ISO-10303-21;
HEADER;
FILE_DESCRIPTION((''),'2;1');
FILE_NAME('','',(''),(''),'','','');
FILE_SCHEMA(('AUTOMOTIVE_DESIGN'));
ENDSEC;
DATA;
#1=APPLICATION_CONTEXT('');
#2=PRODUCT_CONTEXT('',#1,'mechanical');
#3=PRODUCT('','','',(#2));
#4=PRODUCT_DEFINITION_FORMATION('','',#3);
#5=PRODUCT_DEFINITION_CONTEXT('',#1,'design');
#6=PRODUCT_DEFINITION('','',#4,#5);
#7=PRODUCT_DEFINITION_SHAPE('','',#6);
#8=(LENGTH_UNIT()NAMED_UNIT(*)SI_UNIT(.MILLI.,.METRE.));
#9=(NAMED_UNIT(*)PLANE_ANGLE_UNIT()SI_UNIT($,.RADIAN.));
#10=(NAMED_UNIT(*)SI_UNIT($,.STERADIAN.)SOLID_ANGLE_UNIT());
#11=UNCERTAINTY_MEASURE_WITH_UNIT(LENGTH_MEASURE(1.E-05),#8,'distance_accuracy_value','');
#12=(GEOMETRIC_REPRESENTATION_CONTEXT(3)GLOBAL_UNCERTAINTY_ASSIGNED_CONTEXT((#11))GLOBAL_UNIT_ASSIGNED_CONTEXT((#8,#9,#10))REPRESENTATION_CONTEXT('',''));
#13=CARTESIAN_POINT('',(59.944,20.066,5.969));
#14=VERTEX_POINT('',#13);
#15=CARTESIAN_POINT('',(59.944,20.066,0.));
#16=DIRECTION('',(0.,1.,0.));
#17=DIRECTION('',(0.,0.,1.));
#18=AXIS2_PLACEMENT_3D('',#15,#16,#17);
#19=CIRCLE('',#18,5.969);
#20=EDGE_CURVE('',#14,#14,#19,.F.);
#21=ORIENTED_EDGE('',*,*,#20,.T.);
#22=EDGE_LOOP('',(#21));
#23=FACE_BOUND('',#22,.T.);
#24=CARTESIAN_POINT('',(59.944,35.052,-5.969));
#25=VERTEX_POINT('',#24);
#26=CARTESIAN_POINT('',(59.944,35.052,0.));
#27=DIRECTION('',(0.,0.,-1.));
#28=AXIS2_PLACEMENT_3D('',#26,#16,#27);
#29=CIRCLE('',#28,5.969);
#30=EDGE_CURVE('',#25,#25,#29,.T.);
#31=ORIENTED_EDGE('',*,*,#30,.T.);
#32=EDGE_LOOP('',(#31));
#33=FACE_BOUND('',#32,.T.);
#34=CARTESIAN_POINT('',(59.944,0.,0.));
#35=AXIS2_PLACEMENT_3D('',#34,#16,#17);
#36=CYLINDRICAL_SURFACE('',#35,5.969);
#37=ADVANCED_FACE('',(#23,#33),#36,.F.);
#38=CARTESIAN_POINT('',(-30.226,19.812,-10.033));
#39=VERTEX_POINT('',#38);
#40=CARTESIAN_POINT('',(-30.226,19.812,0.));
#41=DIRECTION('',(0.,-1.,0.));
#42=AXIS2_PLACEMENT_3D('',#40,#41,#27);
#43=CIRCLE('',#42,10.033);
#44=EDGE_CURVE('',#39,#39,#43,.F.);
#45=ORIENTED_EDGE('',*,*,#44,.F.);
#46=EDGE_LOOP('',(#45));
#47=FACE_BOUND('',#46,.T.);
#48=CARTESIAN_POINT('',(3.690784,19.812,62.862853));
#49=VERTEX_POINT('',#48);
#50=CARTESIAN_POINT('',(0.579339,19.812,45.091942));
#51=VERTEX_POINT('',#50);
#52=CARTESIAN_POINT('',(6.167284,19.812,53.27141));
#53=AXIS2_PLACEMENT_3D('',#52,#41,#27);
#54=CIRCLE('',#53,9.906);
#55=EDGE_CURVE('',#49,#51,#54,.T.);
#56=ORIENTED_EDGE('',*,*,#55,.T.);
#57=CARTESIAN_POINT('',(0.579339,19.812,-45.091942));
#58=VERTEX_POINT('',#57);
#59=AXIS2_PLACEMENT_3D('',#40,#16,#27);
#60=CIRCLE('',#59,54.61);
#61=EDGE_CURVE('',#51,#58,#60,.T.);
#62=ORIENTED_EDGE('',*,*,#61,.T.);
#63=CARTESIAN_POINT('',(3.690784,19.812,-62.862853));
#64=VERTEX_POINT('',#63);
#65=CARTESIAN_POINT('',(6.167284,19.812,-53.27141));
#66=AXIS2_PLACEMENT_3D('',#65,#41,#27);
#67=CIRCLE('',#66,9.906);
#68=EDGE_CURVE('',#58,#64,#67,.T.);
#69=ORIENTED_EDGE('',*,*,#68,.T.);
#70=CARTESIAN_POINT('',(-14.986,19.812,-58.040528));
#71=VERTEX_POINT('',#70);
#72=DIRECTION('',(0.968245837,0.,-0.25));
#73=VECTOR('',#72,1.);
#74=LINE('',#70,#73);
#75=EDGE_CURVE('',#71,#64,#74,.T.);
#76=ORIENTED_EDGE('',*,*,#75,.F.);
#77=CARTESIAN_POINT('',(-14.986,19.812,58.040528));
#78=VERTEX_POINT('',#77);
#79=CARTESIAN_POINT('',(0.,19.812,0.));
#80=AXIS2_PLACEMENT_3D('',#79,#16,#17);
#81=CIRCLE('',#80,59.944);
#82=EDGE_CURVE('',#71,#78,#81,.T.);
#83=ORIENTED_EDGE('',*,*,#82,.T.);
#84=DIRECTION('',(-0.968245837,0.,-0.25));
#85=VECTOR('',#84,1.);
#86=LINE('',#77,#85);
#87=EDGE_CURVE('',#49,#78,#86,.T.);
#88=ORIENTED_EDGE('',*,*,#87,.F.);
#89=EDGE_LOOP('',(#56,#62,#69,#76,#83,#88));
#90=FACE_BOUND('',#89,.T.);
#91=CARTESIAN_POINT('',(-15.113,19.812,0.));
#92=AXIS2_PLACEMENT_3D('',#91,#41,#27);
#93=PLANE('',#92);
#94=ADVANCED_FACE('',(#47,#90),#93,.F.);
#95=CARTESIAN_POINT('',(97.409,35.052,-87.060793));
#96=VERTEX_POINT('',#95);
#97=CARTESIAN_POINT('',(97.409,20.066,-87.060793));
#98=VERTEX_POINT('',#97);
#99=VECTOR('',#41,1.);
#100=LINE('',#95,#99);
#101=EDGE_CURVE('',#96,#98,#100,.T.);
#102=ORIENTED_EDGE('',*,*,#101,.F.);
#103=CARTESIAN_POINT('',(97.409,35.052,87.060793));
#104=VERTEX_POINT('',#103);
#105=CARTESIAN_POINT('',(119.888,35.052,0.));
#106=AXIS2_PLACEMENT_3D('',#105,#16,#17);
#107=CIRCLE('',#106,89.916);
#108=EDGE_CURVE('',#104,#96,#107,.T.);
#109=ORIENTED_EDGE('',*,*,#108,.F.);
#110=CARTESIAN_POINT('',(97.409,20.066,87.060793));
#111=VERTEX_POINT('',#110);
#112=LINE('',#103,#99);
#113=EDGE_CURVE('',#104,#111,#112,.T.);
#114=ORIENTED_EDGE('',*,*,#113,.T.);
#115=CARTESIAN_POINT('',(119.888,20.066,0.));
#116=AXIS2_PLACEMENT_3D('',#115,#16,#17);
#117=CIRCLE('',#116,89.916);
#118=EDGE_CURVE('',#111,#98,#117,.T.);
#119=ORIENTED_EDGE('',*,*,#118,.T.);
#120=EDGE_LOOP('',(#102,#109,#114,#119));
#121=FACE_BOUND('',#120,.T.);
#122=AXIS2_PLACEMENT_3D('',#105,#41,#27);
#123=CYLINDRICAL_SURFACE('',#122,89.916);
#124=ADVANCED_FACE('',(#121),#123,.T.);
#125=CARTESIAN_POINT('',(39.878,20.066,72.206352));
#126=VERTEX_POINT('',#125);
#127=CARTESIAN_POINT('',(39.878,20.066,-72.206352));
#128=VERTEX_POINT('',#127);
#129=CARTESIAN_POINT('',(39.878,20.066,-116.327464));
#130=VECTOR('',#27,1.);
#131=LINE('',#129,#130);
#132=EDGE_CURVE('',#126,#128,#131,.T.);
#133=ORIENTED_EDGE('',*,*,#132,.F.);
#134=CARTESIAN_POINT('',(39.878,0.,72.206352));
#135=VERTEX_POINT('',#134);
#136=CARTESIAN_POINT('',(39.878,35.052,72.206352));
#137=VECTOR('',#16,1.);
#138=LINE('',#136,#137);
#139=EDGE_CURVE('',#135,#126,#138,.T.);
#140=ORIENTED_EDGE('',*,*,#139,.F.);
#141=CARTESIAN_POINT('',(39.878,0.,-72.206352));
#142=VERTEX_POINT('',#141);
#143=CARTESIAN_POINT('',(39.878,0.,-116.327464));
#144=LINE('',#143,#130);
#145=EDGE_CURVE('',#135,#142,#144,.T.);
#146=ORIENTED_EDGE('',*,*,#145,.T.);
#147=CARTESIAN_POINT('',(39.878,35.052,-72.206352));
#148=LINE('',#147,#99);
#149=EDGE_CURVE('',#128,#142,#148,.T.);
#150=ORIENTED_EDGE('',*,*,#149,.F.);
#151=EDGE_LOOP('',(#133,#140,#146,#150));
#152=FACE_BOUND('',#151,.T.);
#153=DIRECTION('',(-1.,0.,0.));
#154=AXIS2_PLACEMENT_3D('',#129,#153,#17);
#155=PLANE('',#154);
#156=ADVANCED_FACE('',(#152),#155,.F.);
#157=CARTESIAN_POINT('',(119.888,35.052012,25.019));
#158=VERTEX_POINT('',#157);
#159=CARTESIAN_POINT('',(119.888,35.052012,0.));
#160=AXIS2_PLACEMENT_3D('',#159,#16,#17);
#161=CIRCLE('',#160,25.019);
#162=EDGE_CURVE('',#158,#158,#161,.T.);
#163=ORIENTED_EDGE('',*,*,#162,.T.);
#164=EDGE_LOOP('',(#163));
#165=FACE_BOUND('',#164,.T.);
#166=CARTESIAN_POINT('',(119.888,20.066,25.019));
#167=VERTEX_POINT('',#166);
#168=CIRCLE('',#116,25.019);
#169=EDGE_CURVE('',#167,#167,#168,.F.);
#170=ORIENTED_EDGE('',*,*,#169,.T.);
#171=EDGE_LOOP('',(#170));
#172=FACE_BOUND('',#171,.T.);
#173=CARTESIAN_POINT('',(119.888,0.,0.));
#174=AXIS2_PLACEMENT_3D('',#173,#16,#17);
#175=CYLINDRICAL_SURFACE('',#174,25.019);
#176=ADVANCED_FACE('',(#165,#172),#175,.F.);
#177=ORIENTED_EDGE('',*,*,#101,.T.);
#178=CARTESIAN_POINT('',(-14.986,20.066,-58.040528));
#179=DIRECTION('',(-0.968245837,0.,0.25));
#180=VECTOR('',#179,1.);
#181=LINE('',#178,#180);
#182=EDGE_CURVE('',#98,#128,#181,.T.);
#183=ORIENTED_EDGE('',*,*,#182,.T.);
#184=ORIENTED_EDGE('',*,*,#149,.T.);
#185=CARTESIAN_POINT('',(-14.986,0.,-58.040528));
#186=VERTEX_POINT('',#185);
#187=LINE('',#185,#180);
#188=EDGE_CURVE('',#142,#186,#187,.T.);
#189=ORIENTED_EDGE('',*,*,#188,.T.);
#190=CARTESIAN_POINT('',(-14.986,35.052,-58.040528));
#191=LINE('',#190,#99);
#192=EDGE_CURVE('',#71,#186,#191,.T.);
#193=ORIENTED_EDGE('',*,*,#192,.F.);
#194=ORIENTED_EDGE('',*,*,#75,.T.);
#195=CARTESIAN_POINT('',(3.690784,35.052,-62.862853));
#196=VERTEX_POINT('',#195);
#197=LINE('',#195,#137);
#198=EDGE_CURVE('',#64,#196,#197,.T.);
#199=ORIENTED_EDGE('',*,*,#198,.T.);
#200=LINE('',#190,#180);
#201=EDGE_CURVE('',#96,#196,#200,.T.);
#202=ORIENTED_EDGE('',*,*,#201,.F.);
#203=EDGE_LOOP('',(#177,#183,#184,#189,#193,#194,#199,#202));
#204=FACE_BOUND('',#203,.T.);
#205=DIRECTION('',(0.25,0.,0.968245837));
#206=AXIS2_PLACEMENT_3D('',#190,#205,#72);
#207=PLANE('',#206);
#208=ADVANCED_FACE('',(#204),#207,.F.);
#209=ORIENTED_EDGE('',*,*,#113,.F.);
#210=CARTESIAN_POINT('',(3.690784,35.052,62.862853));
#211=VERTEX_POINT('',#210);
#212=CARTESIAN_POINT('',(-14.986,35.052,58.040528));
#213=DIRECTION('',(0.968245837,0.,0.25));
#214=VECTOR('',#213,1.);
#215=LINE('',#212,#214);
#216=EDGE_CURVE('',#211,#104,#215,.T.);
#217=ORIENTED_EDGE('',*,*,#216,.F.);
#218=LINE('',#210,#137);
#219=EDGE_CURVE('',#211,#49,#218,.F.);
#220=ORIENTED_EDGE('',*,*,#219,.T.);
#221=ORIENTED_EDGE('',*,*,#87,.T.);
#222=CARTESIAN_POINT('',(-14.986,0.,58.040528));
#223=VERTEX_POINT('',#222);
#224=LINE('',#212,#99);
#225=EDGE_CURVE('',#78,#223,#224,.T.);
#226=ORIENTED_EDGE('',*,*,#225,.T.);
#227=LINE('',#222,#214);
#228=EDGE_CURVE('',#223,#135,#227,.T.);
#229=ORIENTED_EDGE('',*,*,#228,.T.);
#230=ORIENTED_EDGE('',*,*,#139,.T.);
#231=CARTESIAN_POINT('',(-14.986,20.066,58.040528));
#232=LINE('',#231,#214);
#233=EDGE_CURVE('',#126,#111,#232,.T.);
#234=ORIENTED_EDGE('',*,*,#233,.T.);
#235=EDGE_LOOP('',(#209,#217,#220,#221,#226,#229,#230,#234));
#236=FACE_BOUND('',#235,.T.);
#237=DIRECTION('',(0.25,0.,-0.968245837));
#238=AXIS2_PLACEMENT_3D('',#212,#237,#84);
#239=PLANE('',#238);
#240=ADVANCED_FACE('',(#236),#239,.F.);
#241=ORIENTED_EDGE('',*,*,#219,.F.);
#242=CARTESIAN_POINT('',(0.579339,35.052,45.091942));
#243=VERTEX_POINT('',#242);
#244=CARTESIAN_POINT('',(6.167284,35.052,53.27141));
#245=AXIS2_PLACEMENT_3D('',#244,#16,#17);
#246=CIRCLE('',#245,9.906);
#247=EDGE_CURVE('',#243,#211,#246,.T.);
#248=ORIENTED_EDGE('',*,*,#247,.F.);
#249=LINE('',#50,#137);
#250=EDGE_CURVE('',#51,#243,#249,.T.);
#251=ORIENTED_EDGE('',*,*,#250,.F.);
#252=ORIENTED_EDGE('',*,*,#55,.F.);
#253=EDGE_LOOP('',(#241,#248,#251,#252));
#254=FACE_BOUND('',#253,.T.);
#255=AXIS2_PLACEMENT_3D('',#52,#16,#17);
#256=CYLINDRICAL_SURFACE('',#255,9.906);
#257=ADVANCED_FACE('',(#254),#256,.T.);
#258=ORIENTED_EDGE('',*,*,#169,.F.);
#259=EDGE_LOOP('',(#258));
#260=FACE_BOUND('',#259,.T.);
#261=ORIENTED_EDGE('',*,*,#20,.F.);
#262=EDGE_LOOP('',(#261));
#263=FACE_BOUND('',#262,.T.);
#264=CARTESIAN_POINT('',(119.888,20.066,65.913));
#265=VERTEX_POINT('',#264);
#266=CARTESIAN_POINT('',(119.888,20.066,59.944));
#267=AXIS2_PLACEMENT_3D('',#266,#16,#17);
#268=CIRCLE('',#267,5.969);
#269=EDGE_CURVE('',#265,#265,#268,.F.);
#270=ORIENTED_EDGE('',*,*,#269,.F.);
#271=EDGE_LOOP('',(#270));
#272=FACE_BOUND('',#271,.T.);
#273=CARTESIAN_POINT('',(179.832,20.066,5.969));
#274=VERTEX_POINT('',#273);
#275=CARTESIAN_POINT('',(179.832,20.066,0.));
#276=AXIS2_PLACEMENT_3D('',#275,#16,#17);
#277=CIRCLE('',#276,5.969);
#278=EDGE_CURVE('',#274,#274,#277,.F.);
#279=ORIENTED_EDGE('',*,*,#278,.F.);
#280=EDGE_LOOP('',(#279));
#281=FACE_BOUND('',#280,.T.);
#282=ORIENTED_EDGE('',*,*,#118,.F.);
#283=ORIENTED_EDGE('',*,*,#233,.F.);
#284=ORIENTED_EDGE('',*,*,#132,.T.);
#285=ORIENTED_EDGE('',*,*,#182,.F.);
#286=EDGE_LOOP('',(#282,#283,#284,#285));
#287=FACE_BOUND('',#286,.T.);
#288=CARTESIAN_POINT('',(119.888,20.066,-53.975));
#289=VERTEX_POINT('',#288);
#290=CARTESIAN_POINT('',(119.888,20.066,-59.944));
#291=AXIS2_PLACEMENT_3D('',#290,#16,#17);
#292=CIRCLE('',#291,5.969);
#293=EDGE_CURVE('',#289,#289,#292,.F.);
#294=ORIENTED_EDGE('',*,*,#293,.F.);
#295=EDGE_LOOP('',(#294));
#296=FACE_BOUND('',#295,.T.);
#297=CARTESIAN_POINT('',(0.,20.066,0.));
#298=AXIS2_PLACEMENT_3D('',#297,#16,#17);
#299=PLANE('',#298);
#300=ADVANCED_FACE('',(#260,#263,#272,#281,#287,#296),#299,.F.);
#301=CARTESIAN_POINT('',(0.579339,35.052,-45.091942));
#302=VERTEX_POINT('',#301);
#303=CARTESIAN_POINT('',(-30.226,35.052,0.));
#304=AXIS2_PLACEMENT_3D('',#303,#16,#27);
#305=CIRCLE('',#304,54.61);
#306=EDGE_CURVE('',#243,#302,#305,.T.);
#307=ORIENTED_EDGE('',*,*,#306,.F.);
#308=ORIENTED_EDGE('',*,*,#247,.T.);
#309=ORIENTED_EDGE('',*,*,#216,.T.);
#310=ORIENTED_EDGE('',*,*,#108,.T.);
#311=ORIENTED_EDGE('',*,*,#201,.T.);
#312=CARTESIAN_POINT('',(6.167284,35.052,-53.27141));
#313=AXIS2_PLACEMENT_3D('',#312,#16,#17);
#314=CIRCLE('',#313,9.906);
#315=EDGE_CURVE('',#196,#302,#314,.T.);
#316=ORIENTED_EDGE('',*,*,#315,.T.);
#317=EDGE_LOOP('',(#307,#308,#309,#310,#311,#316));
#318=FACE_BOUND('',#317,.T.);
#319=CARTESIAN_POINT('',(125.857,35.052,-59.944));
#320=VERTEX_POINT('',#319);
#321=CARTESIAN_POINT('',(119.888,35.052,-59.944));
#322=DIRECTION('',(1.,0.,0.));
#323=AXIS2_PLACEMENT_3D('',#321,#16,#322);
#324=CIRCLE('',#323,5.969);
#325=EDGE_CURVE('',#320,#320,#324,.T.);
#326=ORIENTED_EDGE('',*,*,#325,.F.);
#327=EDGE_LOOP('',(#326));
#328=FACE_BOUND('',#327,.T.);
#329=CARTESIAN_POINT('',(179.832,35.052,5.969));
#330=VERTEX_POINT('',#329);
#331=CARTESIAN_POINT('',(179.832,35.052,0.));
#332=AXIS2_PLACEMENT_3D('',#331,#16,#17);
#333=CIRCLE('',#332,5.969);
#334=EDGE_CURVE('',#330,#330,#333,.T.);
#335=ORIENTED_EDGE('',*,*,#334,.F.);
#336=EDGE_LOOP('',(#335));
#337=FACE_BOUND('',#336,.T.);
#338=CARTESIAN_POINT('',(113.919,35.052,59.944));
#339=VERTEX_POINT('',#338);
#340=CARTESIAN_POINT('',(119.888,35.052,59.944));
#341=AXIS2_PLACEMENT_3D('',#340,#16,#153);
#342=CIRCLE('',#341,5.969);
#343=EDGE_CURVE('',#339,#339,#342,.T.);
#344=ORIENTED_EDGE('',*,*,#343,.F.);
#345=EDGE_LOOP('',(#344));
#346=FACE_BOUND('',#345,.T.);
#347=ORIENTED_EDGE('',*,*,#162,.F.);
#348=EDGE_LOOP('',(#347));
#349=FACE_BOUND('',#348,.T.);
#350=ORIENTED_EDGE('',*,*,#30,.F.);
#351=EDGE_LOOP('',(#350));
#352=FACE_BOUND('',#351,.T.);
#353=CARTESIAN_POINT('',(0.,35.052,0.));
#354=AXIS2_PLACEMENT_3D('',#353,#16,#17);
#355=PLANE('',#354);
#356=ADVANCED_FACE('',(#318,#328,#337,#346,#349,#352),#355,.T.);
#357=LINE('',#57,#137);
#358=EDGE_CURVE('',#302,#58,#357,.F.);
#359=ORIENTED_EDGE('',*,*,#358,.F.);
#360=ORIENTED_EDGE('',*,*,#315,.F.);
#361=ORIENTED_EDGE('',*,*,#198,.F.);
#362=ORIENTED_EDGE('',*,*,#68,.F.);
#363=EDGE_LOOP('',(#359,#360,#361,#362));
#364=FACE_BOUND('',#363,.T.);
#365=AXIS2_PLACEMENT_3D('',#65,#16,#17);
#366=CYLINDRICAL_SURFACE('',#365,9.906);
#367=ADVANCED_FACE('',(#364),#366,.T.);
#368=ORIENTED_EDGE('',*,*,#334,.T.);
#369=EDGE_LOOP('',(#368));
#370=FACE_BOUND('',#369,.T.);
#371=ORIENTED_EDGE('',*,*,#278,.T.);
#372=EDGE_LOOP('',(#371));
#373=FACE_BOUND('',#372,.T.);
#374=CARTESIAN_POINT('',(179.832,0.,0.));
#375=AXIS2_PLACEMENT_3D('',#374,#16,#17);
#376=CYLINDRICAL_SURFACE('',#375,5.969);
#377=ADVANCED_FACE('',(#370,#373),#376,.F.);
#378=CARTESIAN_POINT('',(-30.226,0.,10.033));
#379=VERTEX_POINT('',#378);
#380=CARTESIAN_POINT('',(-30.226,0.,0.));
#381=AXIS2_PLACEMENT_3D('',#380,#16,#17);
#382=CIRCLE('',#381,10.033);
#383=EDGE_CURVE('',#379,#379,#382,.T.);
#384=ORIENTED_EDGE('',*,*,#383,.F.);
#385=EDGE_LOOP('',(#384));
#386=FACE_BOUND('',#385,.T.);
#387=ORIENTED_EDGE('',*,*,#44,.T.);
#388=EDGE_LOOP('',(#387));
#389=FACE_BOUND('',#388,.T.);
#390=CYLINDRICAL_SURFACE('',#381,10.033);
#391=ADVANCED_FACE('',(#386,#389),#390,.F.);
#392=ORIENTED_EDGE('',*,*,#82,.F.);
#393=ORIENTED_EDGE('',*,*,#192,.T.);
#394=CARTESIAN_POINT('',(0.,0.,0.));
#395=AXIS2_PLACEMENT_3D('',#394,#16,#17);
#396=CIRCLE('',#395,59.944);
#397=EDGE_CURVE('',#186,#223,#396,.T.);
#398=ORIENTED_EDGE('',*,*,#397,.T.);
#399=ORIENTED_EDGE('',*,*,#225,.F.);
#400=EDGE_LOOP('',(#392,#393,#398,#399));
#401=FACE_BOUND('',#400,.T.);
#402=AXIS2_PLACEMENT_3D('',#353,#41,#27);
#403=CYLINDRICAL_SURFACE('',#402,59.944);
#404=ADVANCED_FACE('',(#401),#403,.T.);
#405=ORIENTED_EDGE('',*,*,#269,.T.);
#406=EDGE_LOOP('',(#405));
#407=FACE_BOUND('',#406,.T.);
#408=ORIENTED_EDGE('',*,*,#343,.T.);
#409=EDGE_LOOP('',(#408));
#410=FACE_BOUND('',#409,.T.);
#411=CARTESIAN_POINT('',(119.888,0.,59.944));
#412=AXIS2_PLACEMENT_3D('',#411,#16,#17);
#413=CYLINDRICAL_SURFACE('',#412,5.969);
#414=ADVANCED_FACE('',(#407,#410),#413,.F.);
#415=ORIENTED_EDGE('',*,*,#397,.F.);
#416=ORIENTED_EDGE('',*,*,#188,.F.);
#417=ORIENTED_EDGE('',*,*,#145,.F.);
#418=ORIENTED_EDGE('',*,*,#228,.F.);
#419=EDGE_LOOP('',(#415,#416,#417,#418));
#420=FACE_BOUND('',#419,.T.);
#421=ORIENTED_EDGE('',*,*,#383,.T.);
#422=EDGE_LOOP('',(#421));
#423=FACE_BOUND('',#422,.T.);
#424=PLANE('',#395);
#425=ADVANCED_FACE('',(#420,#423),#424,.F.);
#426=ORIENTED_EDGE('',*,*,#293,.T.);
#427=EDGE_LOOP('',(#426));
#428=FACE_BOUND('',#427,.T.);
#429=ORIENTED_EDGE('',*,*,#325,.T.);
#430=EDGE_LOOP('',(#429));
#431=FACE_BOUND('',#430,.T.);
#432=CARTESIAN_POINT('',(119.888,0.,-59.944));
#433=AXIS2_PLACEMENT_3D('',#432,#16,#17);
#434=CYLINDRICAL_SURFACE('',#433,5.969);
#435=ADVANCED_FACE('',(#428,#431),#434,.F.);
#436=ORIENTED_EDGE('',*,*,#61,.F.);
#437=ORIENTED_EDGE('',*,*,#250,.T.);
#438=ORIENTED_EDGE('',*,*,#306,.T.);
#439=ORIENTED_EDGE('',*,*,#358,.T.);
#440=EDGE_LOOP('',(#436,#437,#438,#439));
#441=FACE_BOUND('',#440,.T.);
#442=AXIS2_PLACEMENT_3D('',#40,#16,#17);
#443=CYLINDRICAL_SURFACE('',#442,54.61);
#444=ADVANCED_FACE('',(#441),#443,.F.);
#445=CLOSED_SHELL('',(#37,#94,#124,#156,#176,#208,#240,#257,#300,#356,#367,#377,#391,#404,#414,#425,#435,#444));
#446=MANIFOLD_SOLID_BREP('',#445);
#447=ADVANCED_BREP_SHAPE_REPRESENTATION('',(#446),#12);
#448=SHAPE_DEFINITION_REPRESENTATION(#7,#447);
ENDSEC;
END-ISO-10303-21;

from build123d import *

# Parameters (mm, degrees)
BOSS_EXTRUDE1_DEPTH     = 35.052
CUT_EXTRUDE1_DEPTH      = 231.935593134
CUT_EXTRUDE1_DEPTH_BACK = 231.935593134
SKETCH2_R               = 25.019
SKETCH2_R_2             = 10.033
CUT_EXTRUDE2_START      = -15.24
CUT_EXTRUDE2_DEPTH      = 15.24
FILLET1_R               = 9.906
SKETCH5_R               = 5.969
CUT_EXTRUDE3_DEPTH      = 231.935593134
CIRPATTERN1_COUNT       = 4
SKETCH6_W               = 250.475884559
SKETCH6_H               = 232.654927102
CUT_EXTRUDE4_DEPTH      = 20.066


with BuildPart() as part:
    # Sketch1 → Boss-Extrude1 (new body)
    with BuildSketch(Plane(origin=(0, 0, 0), x_dir=(1, 0, 0), z_dir=(0, 1, 0))):
        with BuildLine():
            Line((-14.986, 58.040528426), (97.409, 87.060792639))
            ThreePointArc((97.409, 87.060792639), (209.804, 0), (97.409, -87.060792639))
            Line((97.409, -87.060792639), (-14.986, -58.040528426))
            ThreePointArc((-14.986, -58.040528426), (-59.944, 0), (-14.986, 58.040528426))
        make_face()
    extrude(amount=BOSS_EXTRUDE1_DEPTH)

    # Sketch2 → Cut-Extrude1 (cut, two sides: drawn at the far end of the back side and taken through both)
    with BuildSketch(Plane(origin=(0, 35.052, 0), x_dir=(1, 0, 0), z_dir=(0, 1, 0)).offset(-CUT_EXTRUDE1_DEPTH_BACK)):
        with Locations(Location((119.888, 0, 0), (0, 0, 270))):
            Circle(SKETCH2_R)
        with Locations(Location((-30.226, 0, 0), (0, 0, 270))):
            Circle(SKETCH2_R_2)
    extrude(amount=CUT_EXTRUDE1_DEPTH + CUT_EXTRUDE1_DEPTH_BACK, mode=Mode.SUBTRACT)

    # Sketch3 → Cut-Extrude2 (cut)
    with BuildSketch(Plane(origin=(0, 35.052, 0), x_dir=(1, 0, 0), z_dir=(0, 1, 0)).offset(CUT_EXTRUDE2_START)):
        with BuildLine():
            ThreePointArc((-25.220705882, 54.380135443), (-59.944, 0), (-25.220705882, -54.380135443))
            ThreePointArc((-25.220705882, -54.380135443), (24.384, 0), (-25.220705882, 54.380135443))
        make_face()
    extrude(amount=CUT_EXTRUDE2_DEPTH, mode=Mode.SUBTRACT)

    # Fillet1
    # the kernel refuses this fillet: 9.906 mm, written as the material it takes off along each edge
    with BuildSketch(Plane(origin=(-25.220705882, 19.812, -54.380135443), x_dir=(0.9595509242122834, 0, -0.28153512008868975), z_dir=(0, 1, 0))) as fillet1_piece_1:
        with BuildLine():
            CenterArc((29.806229626, -9.900699967), FILLET1_R, 88.125665331, 131.182876807)
            Line((22.141504015, -16.176113683), (21.375031454, -16.803655054))
            ThreePointArc((21.375031454, -16.803655054), (11.518208373, -7.475588537), (-0.364835977, -0.92096855))
            Line((-0.364835977, -0.92096855), (-0.146921489, 0.979644035))
            ThreePointArc((-0.146921489, 0.979644035), (10.883650693, 1.620974317), (30.162629918, 0.990069997))
            Line((30.162629918, 0.990069997), (30.130229891, 0))
        make_face()
    extrude(amount=90.565574728, mode=Mode.SUBTRACT)
    with BuildSketch(Plane(origin=(-25.220705882, 19.812, 54.380135443), x_dir=(0.9595509242122835, 0, 0.2815351200886891), z_dir=(0, 1, 0))) as fillet1_piece_2:
        with BuildLine():
            CenterArc((29.806229626, 9.900699967), FILLET1_R, 140.691457861, 131.182876807)
            Line((22.141504015, 16.176113683), (21.375031454, 16.803655054))
            ThreePointArc((21.375031454, 16.803655054), (11.518208373, 7.475588537), (-0.364835977, 0.92096855))
            Line((-0.364835977, 0.92096855), (-0.146921489, -0.979644035))
            ThreePointArc((-0.146921489, -0.979644035), (10.883650693, -1.620974317), (30.162629918, -0.990069997))
            Line((30.162629918, -0.990069997), (30.130229891, 0))
        make_face()
    extrude(amount=90.565574728, mode=Mode.SUBTRACT)

    # Sketch5 → Cut-Extrude3 (cut, through all)
    with BuildSketch(Plane(origin=(0, 35.052, 0), x_dir=(1, 0, 0), z_dir=(0, 1, 0))):
        with Locations(Location((179.832, 0, 0), (0, 0, 270))):
            Circle(SKETCH5_R)
    cut_extrude3 = extrude(amount=-CUT_EXTRUDE3_DEPTH, mode=Mode.SUBTRACT)

    # CirPattern1: Cut-Extrude3 ×4 about axis
    cirpattern1_axis = Axis((119.888, 0, 0), (0, 1, 0))
    for i in range(1, CIRPATTERN1_COUNT):
        add(cut_extrude3.rotate(cirpattern1_axis, i * 360 / CIRPATTERN1_COUNT), mode=Mode.SUBTRACT)

    # Sketch6 → Cut-Extrude4 (cut)
    with BuildSketch(Plane.XZ):
        with Locations((165.115942279, 0)):
            Rectangle(SKETCH6_W, SKETCH6_H)
    extrude(amount=-CUT_EXTRUDE4_DEPTH, mode=Mode.SUBTRACT)


solid = part.part
